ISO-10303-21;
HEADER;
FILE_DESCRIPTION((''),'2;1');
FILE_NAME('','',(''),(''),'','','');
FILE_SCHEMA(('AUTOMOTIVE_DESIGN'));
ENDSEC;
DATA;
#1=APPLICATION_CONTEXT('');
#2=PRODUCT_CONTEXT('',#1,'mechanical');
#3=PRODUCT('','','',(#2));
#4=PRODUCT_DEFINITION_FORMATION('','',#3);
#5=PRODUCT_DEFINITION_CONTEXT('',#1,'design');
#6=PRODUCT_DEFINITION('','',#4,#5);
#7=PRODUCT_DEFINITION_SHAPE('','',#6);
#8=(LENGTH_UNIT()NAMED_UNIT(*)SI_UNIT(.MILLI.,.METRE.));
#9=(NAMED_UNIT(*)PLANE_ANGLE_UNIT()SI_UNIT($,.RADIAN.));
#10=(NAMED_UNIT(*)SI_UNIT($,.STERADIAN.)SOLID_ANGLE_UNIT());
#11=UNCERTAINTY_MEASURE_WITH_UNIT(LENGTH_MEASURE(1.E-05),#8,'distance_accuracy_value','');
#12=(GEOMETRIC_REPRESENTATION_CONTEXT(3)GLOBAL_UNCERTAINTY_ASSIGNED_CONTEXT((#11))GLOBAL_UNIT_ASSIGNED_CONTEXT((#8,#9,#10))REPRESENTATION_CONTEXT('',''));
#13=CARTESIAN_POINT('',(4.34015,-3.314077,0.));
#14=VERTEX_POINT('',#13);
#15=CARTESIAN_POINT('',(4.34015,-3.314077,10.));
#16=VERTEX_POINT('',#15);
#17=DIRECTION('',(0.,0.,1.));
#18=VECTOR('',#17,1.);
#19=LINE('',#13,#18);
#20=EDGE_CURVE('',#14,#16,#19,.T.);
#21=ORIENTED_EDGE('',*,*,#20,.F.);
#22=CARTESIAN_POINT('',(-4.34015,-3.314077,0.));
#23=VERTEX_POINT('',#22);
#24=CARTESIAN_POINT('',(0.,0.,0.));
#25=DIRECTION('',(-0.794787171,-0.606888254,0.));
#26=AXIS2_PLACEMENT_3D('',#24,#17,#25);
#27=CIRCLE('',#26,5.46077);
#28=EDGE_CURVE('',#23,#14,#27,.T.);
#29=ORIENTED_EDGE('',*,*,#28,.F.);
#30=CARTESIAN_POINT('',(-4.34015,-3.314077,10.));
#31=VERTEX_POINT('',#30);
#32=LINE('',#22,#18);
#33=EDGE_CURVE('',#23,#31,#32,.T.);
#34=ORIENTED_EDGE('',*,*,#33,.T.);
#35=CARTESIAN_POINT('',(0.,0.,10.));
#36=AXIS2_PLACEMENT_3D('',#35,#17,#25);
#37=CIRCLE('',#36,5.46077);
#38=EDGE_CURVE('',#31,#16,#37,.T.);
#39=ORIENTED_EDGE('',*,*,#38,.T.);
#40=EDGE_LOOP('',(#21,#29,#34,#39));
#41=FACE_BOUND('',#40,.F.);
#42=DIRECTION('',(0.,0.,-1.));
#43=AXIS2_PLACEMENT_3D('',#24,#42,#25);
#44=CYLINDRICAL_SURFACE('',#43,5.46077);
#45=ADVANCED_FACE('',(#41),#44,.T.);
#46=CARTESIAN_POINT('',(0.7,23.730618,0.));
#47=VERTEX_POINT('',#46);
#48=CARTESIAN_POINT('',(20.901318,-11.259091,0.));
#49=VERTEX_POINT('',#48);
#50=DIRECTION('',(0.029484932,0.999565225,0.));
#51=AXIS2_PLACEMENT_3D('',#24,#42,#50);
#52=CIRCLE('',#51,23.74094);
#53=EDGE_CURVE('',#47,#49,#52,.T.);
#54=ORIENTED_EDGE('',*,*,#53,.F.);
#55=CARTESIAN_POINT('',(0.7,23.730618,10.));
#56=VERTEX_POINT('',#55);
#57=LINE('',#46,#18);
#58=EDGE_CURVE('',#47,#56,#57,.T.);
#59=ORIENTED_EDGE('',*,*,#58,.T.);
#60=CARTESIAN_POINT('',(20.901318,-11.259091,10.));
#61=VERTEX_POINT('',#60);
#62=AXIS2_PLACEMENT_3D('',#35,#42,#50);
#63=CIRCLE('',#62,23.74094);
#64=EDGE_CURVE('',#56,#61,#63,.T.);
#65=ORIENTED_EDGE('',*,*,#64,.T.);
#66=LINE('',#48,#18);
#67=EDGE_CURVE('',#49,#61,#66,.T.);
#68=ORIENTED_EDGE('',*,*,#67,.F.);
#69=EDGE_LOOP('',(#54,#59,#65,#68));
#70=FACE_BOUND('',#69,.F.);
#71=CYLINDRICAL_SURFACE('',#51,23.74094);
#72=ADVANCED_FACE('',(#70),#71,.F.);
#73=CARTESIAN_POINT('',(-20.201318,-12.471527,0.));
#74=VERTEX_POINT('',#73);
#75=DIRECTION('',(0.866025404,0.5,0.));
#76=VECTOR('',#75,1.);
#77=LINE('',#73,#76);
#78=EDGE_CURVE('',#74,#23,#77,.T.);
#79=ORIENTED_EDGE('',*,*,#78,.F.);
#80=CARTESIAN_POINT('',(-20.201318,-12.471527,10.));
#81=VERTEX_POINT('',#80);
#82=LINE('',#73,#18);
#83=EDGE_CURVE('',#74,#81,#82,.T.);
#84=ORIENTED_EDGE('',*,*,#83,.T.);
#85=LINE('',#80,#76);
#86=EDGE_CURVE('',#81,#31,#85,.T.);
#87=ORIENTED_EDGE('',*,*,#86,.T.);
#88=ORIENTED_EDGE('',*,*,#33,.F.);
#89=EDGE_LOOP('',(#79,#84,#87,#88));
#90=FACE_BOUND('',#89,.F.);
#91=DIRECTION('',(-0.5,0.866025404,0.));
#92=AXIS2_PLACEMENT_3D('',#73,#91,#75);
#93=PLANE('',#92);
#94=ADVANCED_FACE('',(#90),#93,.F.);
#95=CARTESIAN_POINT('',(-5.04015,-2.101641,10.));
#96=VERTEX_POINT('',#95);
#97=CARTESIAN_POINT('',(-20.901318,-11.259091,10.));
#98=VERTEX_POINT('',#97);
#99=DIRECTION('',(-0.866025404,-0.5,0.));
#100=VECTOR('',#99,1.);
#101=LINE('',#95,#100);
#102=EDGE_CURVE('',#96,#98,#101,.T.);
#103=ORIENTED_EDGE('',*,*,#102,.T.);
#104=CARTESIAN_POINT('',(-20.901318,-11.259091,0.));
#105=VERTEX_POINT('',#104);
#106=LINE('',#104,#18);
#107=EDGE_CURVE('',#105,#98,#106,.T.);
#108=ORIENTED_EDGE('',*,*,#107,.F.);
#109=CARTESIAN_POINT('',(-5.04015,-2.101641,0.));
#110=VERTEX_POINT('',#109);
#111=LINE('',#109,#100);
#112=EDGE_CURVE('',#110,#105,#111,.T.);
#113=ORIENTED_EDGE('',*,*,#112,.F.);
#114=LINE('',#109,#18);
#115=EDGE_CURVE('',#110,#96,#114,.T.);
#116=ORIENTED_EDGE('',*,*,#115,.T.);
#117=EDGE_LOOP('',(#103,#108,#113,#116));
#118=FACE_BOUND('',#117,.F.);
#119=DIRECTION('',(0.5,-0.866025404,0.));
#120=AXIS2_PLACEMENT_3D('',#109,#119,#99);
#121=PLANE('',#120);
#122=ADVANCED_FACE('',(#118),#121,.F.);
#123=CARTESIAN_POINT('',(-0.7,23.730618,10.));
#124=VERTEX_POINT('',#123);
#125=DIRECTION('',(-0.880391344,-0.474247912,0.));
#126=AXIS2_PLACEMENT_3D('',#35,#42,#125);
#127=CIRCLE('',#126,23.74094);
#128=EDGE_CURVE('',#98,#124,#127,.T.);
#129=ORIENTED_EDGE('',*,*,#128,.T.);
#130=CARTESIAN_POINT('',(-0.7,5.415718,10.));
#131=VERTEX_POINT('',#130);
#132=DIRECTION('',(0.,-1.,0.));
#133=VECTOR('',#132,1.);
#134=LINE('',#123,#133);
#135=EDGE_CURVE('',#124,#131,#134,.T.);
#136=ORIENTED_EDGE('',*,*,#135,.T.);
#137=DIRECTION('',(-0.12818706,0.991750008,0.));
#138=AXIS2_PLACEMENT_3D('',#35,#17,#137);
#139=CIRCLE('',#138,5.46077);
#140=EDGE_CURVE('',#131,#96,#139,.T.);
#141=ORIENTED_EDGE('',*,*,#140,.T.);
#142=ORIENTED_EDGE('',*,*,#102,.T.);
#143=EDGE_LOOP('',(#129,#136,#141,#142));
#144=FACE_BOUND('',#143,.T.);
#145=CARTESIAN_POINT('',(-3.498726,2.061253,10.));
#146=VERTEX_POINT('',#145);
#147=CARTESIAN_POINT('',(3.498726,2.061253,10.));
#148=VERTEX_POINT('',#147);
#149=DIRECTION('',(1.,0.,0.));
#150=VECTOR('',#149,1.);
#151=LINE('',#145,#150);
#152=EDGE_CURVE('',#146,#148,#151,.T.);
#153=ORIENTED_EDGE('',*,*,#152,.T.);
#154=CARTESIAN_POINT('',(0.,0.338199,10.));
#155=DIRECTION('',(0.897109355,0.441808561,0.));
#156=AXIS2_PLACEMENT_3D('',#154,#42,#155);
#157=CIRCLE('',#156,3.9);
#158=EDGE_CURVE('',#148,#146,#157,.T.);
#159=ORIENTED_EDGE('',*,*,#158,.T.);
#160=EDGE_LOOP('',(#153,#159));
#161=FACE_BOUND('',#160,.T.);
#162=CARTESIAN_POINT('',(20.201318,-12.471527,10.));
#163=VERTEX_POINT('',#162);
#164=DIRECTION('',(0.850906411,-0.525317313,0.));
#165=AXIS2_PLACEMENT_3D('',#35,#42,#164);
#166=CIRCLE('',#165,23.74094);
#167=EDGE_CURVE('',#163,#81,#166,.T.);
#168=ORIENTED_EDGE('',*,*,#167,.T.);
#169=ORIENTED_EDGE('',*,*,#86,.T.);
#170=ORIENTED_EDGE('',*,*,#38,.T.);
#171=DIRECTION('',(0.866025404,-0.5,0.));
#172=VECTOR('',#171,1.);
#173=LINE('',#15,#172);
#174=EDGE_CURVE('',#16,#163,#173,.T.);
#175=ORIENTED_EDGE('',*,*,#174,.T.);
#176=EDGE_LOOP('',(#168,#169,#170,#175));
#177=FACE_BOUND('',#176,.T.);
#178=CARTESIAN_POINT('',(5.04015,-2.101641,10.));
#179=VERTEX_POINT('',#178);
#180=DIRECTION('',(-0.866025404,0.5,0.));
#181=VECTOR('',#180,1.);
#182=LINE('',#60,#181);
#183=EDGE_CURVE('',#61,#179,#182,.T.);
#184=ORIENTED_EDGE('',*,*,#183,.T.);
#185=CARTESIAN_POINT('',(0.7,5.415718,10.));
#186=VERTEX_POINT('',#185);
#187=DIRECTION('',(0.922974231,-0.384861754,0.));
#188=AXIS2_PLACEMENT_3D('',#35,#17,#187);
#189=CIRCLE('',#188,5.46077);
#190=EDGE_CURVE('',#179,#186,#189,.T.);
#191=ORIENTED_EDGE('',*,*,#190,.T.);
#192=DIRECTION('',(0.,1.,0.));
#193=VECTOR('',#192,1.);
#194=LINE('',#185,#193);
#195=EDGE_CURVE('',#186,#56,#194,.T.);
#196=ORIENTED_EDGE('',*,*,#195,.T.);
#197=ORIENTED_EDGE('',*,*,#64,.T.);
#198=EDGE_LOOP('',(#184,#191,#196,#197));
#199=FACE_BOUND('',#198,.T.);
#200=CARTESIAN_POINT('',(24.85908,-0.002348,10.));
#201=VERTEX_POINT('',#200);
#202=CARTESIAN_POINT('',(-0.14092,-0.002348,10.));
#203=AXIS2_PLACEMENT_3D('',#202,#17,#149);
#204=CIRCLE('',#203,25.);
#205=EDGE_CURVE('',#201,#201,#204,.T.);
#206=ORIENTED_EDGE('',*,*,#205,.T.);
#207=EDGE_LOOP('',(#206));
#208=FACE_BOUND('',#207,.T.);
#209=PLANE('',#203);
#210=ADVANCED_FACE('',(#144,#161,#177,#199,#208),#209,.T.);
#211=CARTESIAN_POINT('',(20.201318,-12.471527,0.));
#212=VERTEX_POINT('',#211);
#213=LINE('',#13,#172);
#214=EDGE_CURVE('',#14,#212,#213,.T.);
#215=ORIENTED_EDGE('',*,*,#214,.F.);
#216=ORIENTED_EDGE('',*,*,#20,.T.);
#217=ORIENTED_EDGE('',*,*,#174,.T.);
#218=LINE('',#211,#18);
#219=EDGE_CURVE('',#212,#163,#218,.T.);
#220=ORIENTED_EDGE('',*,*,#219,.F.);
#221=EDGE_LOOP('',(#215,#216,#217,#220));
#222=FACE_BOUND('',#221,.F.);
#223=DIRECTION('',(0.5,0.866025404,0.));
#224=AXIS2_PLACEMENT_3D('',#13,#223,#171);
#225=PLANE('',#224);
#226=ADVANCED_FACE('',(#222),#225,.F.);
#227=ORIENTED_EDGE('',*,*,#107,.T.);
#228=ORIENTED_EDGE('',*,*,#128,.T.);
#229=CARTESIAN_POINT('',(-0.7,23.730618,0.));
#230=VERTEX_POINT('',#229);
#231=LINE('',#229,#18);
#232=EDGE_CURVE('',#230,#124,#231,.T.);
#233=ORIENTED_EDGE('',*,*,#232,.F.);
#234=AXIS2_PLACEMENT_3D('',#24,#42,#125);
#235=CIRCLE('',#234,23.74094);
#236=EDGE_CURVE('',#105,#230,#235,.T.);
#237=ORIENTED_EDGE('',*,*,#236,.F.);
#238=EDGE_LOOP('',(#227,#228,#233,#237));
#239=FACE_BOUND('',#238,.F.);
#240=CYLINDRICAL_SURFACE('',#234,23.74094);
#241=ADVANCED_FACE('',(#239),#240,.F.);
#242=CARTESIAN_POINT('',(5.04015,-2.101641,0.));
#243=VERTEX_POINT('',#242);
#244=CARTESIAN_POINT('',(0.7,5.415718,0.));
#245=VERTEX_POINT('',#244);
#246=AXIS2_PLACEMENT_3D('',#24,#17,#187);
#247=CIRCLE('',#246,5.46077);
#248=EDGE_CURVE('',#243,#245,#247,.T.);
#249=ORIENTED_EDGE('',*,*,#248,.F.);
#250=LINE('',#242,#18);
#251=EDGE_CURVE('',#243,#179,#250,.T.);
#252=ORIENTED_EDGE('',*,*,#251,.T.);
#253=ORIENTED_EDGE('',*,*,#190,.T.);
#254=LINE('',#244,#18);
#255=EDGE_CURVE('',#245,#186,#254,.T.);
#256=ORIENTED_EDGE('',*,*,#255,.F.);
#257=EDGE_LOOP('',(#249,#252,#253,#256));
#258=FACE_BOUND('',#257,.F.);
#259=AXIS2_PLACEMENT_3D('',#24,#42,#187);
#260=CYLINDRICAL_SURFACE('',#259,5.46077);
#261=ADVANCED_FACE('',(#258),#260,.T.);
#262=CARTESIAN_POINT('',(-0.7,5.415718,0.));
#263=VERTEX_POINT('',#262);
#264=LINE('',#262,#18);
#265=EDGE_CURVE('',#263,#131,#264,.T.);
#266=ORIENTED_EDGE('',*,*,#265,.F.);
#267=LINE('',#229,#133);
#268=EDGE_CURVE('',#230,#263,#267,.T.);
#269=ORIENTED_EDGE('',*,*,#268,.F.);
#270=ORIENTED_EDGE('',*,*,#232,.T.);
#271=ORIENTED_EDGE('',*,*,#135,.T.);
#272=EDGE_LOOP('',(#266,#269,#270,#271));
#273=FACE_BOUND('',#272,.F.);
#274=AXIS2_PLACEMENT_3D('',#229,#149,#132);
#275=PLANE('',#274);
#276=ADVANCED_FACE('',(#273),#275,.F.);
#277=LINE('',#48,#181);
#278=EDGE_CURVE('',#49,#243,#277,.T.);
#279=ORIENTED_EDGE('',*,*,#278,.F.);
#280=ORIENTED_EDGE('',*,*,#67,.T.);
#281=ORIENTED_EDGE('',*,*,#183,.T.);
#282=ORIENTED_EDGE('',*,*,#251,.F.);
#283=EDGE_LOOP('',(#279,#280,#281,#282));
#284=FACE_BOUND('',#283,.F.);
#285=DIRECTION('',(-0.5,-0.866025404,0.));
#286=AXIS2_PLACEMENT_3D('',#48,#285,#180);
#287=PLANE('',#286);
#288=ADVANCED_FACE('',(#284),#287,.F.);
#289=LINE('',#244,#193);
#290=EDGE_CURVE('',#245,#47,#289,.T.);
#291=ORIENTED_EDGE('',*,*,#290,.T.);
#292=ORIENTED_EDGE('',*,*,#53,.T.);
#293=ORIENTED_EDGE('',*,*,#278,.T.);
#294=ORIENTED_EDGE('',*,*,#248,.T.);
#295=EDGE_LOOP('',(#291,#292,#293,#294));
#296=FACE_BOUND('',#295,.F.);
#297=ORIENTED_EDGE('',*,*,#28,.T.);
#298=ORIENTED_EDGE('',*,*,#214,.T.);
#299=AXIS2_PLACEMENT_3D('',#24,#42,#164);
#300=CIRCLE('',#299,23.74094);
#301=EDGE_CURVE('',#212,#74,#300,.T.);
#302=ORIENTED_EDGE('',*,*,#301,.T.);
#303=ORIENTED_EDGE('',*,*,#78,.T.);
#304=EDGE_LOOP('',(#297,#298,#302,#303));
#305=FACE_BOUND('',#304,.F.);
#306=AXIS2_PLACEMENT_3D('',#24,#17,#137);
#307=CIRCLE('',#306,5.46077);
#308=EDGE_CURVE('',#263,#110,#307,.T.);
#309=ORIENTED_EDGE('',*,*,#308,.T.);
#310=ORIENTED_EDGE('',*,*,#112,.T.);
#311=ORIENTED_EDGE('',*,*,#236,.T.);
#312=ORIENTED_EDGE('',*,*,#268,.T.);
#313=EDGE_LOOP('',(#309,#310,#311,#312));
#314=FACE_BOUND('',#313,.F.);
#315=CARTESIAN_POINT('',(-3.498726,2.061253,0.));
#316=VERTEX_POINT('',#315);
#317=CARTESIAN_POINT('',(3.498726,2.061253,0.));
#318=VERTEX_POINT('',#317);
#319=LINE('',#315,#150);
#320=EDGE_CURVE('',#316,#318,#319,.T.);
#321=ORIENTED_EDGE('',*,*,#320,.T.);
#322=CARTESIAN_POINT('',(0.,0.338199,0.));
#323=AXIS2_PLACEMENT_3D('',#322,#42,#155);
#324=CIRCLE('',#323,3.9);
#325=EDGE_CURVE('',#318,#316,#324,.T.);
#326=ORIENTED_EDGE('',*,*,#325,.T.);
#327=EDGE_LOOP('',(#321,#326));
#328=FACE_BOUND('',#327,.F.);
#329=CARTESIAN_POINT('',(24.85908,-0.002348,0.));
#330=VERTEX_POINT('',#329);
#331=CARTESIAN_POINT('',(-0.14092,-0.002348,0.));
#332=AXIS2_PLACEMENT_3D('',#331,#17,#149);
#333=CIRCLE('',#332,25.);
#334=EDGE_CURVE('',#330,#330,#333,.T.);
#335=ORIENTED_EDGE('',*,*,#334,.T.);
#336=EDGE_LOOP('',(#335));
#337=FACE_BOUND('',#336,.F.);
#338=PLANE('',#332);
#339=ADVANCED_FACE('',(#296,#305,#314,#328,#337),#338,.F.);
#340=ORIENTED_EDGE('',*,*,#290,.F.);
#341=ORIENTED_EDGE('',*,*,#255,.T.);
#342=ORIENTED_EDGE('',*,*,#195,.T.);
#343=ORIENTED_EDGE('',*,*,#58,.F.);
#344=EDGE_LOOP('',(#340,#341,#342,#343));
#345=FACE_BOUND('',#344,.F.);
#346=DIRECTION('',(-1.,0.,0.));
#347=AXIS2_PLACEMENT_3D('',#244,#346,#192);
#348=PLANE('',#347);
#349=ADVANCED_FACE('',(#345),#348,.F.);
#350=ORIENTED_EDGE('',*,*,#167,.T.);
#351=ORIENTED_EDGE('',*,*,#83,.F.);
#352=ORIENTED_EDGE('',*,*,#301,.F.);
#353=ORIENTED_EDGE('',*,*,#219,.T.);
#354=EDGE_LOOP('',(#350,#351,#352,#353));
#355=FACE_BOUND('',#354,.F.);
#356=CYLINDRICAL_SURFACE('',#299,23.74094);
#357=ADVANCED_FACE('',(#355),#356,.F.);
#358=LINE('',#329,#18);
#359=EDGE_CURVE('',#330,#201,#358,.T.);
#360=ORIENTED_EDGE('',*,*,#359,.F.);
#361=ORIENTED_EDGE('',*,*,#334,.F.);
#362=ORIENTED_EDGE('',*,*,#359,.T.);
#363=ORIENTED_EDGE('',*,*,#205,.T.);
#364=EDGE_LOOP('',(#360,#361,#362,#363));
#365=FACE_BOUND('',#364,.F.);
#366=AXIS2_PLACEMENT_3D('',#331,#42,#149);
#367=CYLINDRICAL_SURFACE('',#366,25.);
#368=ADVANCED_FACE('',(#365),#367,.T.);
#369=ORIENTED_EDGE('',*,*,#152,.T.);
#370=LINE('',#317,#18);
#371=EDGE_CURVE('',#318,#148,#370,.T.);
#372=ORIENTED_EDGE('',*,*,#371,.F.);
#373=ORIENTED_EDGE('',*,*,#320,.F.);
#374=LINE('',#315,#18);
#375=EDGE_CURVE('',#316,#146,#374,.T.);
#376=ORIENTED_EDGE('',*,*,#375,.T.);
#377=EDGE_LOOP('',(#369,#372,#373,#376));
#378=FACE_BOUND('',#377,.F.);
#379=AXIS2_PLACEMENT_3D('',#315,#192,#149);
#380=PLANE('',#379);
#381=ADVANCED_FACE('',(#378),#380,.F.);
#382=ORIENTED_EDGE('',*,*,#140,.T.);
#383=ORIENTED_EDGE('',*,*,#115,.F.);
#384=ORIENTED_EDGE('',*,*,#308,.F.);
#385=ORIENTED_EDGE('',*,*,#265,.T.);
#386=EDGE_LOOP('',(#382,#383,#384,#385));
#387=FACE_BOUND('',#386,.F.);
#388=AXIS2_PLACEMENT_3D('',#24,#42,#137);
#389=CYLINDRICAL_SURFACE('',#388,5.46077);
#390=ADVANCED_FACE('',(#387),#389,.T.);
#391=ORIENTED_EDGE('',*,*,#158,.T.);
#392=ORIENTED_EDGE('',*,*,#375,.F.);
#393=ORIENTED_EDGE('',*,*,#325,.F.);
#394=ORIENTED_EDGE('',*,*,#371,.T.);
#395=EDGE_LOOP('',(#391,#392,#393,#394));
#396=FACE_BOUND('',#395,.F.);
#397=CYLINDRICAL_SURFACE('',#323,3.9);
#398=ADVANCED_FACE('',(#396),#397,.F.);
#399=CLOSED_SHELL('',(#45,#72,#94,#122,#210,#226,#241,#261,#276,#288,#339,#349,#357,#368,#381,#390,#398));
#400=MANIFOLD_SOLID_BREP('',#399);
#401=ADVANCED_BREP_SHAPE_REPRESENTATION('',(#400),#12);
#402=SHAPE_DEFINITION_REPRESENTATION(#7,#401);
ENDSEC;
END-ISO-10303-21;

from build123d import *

# Parameters (mm, degrees)
F0_R     = 25
F1_DEPTH = 10


# Not quite as in the source:
# - a feature names something its author has since deleted; it is built from what else it names


with BuildPart() as f1:
    # F0 (on Top) → F1 (new body)
    with BuildSketch(Plane.XY):
        with Locations((-0.1409200142, -0.0023476887)):
            Circle(F0_R)
        with BuildLine():
            ThreePointArc((0.7, 23.7306175986), (17.033068856, 16.5380402997), (23.7409395688, 0))
            ThreePointArc((23.7409395688, 0), (23.0200904836, -5.8058286004), (20.9013176879, -11.2590910166))
            ThreePointArc((20.9013176879, -11.2590910166), (20.5602567763, -11.8704697844), (20.2013176879, -12.4715265819))
            ThreePointArc((20.2013176879, -12.4715265819), (0, -23.7409395688), (-20.2013176879, -12.4715265819))
            ThreePointArc((-20.2013176879, -12.4715265819), (-20.5602567763, -11.8704697844), (-20.9013176879, -11.2590910166))
            ThreePointArc((-20.9013176879, -11.2590910166), (-20.5602567763, 11.8704697844), (-0.7, 23.7306175986))
            ThreePointArc((-0.7, 23.7306175986), (0, 23.7409395688), (0.7, 23.7306175986))
        make_face(mode=Mode.SUBTRACT)
        with BuildLine():
            ThreePointArc((5.4607696164, 0), (4.1013743754, 3.6053755749), (0.7, 5.4157183091))
            ThreePointArc((0.7, 5.4157183091), (0.3507241153, 5.4494951508), (0, 5.4607696164))
            ThreePointArc((0, 5.4607696164), (-0.3507241153, 5.4494951508), (-0.7, 5.4157183091))
            ThreePointArc((-0.7, 5.4157183091), (-4.729165212, 2.7303848082), (-5.0401496354, -2.1016413719))
            ThreePointArc((-5.0401496354, -2.1016413719), (-4.8947632961, -2.4210115818), (-4.729165212, -2.7303848082))
            ThreePointArc((-4.729165212, -2.7303848082), (-4.5440391807, -3.028483569), (-4.3401496354, -3.3140769372))
            ThreePointArc((-4.3401496354, -3.3140769372), (0, -5.4607696164), (4.3401496354, -3.3140769372))
            ThreePointArc((4.3401496354, -3.3140769372), (4.5440391807, -3.028483569), (4.729165212, -2.7303848082))
            ThreePointArc((4.729165212, -2.7303848082), (4.8947632961, -2.4210115818), (5.0401496354, -2.1016413719))
            ThreePointArc((5.0401496354, -2.1016413719), (5.354582187, -1.0716596503), (5.4607696164, 0))
        make_face()
        with BuildLine():
            Line((-3.4987264855, 2.0612527399), (0, 2.0612527399))
            Line((0, 2.0612527399), (3.4987264855, 2.0612527399))
            ThreePointArc((3.4987264855, 2.0612527399), (0, -3.5618006487), (-3.4987264855, 2.0612527399))
        make_face(mode=Mode.SUBTRACT)
        with BuildLine():
            Line((-5.0401496354, -2.1016413719), (-20.9013176879, -11.2590910166))
            ThreePointArc((-20.9013176879, -11.2590910166), (-20.5602567763, -11.8704697844), (-20.2013176879, -12.4715265819))
            Line((-20.2013176879, -12.4715265819), (-4.3401496354, -3.3140769372))
            ThreePointArc((-4.3401496354, -3.3140769372), (-4.5440391807, -3.028483569), (-4.729165212, -2.7303848082))
            ThreePointArc((-4.729165212, -2.7303848082), (-4.8947632961, -2.4210115818), (-5.0401496354, -2.1016413719))
        make_face()
        with BuildLine():
            Line((0.7, 5.4157183091), (0.7, 23.7306175986))
            ThreePointArc((0.7, 23.7306175986), (0, 23.7409395688), (-0.7, 23.7306175986))
            Line((-0.7, 23.7306175986), (-0.7, 5.4157183091))
            ThreePointArc((-0.7, 5.4157183091), (-0.3507241153, 5.4494951508), (0, 5.4607696164))
            ThreePointArc((0, 5.4607696164), (0.3507241153, 5.4494951508), (0.7, 5.4157183091))
        make_face()
        with BuildLine():
            ThreePointArc((20.2013176879, -12.4715265819), (20.5602567763, -11.8704697844), (20.9013176879, -11.2590910166))
            Line((20.9013176879, -11.2590910166), (5.0401496354, -2.1016413719))
            ThreePointArc((5.0401496354, -2.1016413719), (4.8947632961, -2.4210115818), (4.729165212, -2.7303848082))
            ThreePointArc((4.729165212, -2.7303848082), (4.5440391807, -3.028483569), (4.3401496354, -3.3140769372))
            Line((4.3401496354, -3.3140769372), (20.2013176879, -12.4715265819))
        make_face()
    extrude(amount=F1_DEPTH)


solid = f1.part
